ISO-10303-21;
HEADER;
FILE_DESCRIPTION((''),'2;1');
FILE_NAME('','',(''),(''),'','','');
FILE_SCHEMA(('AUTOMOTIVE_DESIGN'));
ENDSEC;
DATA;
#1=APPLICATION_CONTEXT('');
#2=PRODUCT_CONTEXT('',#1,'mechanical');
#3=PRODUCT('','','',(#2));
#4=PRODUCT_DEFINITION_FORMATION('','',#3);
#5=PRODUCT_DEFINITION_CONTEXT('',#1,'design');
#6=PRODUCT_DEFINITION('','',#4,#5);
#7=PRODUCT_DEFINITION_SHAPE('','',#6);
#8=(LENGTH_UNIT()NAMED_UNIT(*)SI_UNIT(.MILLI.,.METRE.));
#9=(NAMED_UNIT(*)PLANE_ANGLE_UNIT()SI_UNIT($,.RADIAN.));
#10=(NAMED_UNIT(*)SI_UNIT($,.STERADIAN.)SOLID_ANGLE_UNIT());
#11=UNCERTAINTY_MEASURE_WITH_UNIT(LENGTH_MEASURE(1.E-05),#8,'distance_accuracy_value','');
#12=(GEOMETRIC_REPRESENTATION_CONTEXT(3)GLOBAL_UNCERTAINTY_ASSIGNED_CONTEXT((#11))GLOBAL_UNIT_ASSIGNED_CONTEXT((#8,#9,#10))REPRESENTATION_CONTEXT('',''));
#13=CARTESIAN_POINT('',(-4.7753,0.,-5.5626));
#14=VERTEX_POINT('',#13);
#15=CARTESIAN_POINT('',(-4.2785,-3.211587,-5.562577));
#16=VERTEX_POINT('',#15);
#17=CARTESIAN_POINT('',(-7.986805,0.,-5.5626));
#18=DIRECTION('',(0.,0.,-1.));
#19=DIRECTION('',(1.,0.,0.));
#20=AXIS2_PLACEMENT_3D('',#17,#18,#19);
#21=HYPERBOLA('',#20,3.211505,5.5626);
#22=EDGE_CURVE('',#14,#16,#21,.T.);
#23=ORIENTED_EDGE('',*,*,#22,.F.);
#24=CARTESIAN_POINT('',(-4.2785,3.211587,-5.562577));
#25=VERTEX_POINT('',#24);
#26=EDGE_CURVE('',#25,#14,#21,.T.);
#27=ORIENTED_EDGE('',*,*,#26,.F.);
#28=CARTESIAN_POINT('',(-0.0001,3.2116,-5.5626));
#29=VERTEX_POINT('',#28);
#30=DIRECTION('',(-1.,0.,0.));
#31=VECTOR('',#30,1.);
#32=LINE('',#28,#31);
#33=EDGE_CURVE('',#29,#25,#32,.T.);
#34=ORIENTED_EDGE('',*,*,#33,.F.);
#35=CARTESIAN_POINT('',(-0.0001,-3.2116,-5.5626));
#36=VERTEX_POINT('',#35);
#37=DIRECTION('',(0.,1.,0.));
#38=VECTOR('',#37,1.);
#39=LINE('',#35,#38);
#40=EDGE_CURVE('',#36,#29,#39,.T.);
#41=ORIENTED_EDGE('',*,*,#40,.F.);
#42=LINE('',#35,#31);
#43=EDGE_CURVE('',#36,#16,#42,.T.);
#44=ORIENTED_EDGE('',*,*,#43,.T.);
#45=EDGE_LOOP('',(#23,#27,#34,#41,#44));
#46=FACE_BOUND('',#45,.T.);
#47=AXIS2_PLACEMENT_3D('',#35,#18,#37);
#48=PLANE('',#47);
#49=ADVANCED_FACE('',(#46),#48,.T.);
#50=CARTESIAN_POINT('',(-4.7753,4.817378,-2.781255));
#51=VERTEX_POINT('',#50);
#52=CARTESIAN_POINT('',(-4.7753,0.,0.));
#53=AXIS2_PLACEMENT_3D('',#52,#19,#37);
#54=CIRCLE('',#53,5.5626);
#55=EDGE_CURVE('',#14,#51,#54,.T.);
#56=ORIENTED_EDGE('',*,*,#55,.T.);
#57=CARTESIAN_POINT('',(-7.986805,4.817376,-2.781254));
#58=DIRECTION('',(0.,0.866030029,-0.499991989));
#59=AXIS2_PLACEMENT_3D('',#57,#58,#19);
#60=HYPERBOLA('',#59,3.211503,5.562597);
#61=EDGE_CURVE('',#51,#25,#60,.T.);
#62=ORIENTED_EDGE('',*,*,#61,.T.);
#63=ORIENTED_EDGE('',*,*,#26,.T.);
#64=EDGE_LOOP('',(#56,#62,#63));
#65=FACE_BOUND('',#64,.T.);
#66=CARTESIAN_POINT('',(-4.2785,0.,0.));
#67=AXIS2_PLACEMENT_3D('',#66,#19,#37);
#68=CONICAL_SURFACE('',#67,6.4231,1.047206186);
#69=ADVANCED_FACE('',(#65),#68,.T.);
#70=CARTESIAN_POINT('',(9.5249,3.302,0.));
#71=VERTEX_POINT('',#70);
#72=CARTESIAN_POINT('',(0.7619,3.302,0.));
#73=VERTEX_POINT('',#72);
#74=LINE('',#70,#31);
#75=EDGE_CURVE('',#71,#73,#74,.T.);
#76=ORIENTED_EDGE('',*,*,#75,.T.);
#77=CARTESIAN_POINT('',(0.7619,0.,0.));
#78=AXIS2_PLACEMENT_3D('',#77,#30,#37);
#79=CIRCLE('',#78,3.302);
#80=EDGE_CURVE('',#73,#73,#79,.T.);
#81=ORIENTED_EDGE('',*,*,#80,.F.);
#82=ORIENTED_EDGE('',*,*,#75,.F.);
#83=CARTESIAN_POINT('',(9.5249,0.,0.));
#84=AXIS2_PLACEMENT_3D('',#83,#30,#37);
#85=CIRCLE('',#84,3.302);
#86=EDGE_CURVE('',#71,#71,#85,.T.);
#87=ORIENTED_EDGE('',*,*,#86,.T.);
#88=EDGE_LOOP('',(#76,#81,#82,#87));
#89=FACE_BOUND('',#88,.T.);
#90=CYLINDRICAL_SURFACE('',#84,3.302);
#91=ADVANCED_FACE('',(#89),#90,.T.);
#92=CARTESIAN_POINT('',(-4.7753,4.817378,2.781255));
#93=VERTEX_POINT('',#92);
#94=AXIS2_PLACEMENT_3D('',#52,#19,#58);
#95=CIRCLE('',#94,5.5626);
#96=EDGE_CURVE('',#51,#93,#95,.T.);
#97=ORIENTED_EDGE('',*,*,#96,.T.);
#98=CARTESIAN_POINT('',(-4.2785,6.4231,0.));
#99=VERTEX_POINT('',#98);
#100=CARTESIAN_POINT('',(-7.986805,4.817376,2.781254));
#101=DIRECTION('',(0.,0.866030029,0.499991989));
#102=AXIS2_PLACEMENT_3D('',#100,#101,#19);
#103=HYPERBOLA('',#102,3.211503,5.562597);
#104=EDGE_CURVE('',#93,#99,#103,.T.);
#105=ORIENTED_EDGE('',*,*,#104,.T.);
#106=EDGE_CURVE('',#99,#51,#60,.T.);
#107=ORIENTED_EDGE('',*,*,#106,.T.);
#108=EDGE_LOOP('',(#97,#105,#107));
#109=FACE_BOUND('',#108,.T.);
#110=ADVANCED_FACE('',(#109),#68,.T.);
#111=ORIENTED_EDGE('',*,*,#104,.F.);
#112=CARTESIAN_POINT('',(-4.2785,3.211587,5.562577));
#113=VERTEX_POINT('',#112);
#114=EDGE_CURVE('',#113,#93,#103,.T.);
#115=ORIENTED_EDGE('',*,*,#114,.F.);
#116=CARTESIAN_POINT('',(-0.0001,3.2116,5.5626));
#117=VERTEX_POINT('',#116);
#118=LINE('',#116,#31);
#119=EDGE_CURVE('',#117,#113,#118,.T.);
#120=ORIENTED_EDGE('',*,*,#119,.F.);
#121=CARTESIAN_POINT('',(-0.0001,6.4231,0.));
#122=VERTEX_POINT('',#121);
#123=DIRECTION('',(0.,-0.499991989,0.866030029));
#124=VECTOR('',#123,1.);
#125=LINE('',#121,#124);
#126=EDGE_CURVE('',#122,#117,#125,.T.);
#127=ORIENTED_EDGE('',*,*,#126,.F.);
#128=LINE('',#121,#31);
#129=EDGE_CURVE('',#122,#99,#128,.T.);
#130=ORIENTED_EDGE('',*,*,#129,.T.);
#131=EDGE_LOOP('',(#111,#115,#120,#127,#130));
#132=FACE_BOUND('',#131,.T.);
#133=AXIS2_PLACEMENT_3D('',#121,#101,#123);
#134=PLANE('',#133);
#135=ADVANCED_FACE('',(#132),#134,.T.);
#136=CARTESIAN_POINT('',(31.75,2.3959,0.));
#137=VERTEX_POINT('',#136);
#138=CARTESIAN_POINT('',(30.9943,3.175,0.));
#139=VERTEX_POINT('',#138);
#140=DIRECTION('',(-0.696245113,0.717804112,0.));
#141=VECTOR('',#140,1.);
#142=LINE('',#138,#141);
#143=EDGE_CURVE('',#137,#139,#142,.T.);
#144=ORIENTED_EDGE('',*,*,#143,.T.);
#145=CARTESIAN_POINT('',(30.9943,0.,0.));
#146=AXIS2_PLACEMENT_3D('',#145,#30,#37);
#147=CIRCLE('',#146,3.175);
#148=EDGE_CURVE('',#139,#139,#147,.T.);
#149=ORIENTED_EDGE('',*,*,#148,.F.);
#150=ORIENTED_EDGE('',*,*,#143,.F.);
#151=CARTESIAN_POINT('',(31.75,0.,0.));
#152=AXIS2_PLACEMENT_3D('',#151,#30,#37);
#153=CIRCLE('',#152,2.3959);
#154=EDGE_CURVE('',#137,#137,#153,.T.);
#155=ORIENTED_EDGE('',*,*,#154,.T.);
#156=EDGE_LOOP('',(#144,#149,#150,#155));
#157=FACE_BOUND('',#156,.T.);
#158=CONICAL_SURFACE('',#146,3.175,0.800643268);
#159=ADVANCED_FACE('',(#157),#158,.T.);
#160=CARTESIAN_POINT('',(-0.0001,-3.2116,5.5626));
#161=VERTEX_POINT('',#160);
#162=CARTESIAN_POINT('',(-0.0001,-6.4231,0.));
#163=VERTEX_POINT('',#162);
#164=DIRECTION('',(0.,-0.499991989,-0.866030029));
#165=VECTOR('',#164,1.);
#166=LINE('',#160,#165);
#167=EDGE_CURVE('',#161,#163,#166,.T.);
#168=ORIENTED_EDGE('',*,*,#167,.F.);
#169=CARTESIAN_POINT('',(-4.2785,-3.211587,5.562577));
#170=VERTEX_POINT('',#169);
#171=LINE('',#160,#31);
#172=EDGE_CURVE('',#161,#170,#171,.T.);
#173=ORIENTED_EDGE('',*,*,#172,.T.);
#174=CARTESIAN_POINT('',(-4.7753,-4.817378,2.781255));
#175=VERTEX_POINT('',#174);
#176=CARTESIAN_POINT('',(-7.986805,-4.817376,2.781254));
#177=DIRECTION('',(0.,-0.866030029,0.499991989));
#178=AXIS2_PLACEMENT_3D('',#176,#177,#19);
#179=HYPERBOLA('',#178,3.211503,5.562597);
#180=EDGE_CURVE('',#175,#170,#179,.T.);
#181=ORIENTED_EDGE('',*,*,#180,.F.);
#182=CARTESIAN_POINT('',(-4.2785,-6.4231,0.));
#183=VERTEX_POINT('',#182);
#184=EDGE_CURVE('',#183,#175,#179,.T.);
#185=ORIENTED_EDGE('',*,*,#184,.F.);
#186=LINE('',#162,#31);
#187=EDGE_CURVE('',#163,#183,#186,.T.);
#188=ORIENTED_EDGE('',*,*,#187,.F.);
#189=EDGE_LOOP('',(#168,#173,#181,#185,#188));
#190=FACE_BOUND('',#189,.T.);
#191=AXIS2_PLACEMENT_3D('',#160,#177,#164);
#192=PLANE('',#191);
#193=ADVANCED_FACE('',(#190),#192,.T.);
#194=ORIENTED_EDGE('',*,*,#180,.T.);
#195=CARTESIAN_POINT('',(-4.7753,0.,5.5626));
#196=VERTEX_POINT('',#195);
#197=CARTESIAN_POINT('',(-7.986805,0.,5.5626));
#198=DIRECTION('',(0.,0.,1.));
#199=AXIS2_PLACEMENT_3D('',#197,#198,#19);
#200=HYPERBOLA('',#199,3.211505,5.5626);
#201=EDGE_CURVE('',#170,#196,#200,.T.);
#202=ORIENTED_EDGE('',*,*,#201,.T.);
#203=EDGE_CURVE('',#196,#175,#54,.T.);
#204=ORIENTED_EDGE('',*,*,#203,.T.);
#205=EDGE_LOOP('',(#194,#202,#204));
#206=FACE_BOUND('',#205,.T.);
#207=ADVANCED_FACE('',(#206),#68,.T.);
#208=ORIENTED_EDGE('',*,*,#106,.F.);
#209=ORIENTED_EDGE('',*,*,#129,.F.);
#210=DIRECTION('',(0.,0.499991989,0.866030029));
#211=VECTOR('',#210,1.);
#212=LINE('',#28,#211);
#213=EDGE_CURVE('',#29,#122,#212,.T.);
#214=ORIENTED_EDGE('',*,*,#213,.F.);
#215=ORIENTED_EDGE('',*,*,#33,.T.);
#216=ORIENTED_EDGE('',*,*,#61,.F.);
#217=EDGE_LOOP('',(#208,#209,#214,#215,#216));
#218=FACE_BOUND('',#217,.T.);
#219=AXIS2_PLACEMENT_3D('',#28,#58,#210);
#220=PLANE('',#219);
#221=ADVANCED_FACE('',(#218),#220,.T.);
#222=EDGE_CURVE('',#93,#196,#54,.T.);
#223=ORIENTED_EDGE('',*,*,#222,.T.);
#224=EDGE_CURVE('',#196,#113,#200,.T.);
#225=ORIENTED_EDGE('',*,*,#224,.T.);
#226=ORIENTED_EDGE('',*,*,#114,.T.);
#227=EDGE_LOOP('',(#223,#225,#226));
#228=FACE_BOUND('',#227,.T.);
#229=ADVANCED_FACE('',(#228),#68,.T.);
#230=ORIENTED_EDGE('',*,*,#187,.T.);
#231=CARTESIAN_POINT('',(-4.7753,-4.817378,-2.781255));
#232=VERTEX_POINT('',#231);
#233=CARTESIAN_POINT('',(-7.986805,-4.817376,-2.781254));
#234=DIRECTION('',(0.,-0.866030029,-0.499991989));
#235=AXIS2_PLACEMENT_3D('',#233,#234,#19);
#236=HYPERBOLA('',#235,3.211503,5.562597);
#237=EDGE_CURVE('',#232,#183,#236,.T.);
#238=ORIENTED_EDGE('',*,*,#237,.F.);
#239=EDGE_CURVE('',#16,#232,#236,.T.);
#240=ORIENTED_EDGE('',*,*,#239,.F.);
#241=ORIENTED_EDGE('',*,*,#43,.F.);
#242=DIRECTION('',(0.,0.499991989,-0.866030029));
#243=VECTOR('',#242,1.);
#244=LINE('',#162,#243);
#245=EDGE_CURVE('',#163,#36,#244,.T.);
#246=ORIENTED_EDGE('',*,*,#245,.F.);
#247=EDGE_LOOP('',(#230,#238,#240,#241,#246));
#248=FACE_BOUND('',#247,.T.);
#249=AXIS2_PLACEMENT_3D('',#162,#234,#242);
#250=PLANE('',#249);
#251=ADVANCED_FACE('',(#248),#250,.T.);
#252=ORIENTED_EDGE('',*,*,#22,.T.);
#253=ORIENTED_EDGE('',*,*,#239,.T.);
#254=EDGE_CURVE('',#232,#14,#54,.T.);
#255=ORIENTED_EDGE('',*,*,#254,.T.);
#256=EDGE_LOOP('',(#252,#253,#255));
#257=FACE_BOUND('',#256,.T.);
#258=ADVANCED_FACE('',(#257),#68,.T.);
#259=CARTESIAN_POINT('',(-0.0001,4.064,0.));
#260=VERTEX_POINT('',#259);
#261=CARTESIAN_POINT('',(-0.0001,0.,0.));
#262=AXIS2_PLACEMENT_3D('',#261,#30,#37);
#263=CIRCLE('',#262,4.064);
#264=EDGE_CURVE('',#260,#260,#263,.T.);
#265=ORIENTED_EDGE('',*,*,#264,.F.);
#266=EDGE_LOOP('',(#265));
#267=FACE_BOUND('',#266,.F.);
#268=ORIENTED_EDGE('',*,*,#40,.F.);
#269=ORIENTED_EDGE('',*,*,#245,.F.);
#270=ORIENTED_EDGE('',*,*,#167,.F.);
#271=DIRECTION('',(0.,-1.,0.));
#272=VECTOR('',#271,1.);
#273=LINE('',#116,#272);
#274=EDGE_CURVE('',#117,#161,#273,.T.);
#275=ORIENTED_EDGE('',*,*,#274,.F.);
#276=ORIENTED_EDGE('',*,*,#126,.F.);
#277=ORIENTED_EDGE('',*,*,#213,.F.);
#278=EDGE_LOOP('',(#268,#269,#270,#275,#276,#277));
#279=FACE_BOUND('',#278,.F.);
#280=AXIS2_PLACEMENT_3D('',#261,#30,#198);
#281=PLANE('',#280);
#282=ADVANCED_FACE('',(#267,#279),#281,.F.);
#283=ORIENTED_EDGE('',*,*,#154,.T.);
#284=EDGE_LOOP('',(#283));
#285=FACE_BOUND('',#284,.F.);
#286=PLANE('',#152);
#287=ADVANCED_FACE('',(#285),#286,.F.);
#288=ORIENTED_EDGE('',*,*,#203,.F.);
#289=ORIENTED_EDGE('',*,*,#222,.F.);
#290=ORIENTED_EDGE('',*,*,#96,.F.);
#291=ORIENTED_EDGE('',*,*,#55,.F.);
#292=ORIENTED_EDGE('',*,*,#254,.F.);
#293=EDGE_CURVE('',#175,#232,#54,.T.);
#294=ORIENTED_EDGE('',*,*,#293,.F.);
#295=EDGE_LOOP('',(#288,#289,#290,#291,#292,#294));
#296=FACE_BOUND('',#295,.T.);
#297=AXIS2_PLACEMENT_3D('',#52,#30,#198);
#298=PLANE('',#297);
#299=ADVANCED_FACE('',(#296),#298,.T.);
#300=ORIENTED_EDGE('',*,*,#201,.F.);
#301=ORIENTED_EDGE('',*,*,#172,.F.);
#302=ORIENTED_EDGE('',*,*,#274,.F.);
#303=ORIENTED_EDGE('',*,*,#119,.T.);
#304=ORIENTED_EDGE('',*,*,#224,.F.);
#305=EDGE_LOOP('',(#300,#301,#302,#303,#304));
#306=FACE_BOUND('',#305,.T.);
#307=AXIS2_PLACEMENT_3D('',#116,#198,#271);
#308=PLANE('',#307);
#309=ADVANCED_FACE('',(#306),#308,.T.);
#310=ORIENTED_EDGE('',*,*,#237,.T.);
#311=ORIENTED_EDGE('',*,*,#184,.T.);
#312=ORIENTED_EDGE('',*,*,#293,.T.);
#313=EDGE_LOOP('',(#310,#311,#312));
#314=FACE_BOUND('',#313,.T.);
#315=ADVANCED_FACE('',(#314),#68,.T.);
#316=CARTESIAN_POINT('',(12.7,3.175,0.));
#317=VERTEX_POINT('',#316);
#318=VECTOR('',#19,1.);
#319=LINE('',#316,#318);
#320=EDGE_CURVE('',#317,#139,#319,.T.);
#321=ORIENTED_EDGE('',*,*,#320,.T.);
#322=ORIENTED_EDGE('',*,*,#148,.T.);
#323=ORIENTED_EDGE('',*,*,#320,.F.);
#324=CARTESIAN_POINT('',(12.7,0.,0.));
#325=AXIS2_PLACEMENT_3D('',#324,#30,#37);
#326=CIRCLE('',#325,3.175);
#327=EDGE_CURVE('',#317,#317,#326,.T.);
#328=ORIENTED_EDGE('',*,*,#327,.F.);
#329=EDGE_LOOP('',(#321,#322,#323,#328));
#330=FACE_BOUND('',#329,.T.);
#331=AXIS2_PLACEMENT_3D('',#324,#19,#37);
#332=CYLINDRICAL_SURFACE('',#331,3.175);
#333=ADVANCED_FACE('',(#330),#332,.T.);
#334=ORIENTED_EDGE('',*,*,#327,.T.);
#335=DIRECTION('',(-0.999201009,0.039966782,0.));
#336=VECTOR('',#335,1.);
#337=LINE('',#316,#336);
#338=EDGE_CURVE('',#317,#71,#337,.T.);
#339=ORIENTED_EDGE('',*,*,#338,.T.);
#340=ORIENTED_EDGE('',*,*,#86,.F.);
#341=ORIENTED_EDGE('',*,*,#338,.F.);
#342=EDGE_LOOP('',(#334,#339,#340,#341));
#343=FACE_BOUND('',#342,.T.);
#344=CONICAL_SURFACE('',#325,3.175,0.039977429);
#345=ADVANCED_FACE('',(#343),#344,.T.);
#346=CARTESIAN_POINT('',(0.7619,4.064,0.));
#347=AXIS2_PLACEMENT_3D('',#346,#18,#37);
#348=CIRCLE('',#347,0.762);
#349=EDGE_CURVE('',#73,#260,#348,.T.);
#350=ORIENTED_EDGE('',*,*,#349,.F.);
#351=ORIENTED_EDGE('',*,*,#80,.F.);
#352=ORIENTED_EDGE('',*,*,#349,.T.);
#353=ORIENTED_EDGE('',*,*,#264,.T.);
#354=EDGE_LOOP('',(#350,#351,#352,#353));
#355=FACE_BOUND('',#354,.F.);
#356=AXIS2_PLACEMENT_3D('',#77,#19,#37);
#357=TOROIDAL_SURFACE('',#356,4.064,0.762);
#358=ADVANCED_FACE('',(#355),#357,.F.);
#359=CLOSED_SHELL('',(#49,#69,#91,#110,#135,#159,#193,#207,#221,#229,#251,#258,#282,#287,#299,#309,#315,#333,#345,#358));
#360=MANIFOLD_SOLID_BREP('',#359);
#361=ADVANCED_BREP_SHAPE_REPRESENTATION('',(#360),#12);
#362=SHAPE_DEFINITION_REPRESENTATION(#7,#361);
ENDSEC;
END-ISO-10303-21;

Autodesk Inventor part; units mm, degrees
ref_plane "YZ Plane" through (0, 0, 0) normal (1, 0, 0) x (0, 1, 0)
ref_plane "XZ Plane" through (0, 0, 0) normal (0, 1, 0) x (-1, 0, 0)
sketch "Sketch1" plane through (0, 0, 0) normal (0, 0, 1) x (1, 0, 0)
  line L0 (0, 5.5626) -> (0, 3.302)
  line L1 (12.7, 3.175) -> (31.75, 3.175)
  line L2 (31.75, 3.175) -> (31.75, 0)
  line L3 (31.75, 0) -> (-0.0001, 0)
  line L4 (-6.3501, 0) -> (38.1, 0) projected
  line L5 (-0.0001, 0) -> (-0.0001, 5.5626)
  line L6 (-0.0001, 5.5626) -> (0, 5.5626)
  line L7 (12.7, 3.175) -> (9.5249, 3.302)
  line L8 (9.5249, 3.302) -> (0, 3.302)
  line L9 (0, -1.1125) -> (0, 6.6751) projected
  dimension "d0" = 31.75
  dimension "d1" = 19.05
  dimension "d2" = 6.35
  dimension "d9" = 0.0001
  dimension "d10" = 11.1252
  dimension "d13" = 3.1751
  dimension "d14" = 6.604
revolve "Body" add sketch "Sketch1" angle 360 about axis through (31.75, 0, 0) along (-1, 0, 0)
sketch "Sketch2" plane through (-0.0001, 0, 0) normal (-1, 0, 0) x (0, 0, 1)
  line L0 (0, 6.4231) -> (5.5626, 3.2116)
  line L1 (5.5626, 3.2116) -> (5.5626, -3.2116)
  line L2 (5.5626, -3.2116) -> (0, -6.4231)
  line L3 (0, -6.4231) -> (-5.5626, -3.2116)
  line L4 (-5.5626, -3.2116) -> (-5.5626, 3.2116)
  line L5 (-5.5626, 3.2116) -> (0, 6.4231)
  point P0 (0, 0)
  point P1 (0, 0)
  dimension "d11" = 11.1252
extrude "Head" add sketch "Sketch2" along normal blind 4.7752
sketch "Sketch4" plane through (0, 0, 0) normal (0, 0, 1) x (1, 0, 0)
  line L0 (-4.7753, 5.5626) -> (-4.7753, 6.4231)
  line L1 (-4.7753, 6.4231) -> (-4.2785, 6.4231)
  line L2 (-4.2785, 6.4231) -> (-4.7753, 5.5626)
  line L3 (-5.7303, 0) -> (0.9549, 0) projected
  line L4 (-0.0001, 6.4231) -> (-4.7753, 6.4231) projected
  line L5 (-4.7753, 3.2116) -> (-4.7753, 6.4231) projected
  dimension "d5" = 30
  dimension "d19" = 11.1252
revolve "Chamfer1" cut sketch "Sketch4" angle 360 about axis through (-10, 0, 0) along (1, 0, 0)
thread "Thread" size "1/4-20 UNC" class "2A" standard "ANSI Unified Screw Threads" length 19.05
chamfer "Chamfer2" distance 0.7791 distance2 0.7557 1 edges at (31.75, -3.175, 0) measured on face at (31.75, 0.3185, 0.8814)
ref_plane "Work Plane1" through (1.525, 0, 0) normal (0, 0, 1) x (1, 0, 0)
fillet "Fillet2" radius 0.762 1 edges at (0, -3.302, 0)
equation "\"d0\" = NLG"
equation "\"d1\" = GEL"
equation "\"d2\" = GD"
equation "\"d10\" = SD2"
equation "\"d14\" = BDM"
equation "\"d11\" = SW"
equation "\"d3\" = KOH - SD"
equation "\"d5\" = ANG1"
equation "\"d19\" = SW0"
equation "\"d63\" = R"
equation "\"d15\" = GEL"
equation "\"d6\" = -0.5 * SPD + 0.5 * GD"
equation "\"NLG\" = 31.75"
equation "\"GD\" = NND"
equation "\"BDM\" = 6.604"
equation "\"KOH\" = 4.7752"
equation "\"GEL\" = 19.05"
equation "\"SW\" = 11.1252"
equation "\"SW0\" = SW"
equation "\"SPD\" = GD1"
equation "\"SD2\" = SW"
equation "\"SD\" = 0"
equation "\"ANG1\" = 30deg"
equation "\"GAL\" = 3.175"
equation "\"GUL\" = 0.238 * GAL"
equation "\"R\" = 0.762"
equation "\"d62\" = -NLG - SD + GUL"
equation "\"GD1\" = 4.79184"
equation "\"THREADDIA\" = 6.35"
equation "\"TOA\" = 30deg"
equation "\"NND\" = 6.35"
equation "\"E0\" = 1.155 * SW"
properties part number "ANSI/ASME B18.2.1 - 1/4-20 UNC - 1.25" material "Steel, Mild"
